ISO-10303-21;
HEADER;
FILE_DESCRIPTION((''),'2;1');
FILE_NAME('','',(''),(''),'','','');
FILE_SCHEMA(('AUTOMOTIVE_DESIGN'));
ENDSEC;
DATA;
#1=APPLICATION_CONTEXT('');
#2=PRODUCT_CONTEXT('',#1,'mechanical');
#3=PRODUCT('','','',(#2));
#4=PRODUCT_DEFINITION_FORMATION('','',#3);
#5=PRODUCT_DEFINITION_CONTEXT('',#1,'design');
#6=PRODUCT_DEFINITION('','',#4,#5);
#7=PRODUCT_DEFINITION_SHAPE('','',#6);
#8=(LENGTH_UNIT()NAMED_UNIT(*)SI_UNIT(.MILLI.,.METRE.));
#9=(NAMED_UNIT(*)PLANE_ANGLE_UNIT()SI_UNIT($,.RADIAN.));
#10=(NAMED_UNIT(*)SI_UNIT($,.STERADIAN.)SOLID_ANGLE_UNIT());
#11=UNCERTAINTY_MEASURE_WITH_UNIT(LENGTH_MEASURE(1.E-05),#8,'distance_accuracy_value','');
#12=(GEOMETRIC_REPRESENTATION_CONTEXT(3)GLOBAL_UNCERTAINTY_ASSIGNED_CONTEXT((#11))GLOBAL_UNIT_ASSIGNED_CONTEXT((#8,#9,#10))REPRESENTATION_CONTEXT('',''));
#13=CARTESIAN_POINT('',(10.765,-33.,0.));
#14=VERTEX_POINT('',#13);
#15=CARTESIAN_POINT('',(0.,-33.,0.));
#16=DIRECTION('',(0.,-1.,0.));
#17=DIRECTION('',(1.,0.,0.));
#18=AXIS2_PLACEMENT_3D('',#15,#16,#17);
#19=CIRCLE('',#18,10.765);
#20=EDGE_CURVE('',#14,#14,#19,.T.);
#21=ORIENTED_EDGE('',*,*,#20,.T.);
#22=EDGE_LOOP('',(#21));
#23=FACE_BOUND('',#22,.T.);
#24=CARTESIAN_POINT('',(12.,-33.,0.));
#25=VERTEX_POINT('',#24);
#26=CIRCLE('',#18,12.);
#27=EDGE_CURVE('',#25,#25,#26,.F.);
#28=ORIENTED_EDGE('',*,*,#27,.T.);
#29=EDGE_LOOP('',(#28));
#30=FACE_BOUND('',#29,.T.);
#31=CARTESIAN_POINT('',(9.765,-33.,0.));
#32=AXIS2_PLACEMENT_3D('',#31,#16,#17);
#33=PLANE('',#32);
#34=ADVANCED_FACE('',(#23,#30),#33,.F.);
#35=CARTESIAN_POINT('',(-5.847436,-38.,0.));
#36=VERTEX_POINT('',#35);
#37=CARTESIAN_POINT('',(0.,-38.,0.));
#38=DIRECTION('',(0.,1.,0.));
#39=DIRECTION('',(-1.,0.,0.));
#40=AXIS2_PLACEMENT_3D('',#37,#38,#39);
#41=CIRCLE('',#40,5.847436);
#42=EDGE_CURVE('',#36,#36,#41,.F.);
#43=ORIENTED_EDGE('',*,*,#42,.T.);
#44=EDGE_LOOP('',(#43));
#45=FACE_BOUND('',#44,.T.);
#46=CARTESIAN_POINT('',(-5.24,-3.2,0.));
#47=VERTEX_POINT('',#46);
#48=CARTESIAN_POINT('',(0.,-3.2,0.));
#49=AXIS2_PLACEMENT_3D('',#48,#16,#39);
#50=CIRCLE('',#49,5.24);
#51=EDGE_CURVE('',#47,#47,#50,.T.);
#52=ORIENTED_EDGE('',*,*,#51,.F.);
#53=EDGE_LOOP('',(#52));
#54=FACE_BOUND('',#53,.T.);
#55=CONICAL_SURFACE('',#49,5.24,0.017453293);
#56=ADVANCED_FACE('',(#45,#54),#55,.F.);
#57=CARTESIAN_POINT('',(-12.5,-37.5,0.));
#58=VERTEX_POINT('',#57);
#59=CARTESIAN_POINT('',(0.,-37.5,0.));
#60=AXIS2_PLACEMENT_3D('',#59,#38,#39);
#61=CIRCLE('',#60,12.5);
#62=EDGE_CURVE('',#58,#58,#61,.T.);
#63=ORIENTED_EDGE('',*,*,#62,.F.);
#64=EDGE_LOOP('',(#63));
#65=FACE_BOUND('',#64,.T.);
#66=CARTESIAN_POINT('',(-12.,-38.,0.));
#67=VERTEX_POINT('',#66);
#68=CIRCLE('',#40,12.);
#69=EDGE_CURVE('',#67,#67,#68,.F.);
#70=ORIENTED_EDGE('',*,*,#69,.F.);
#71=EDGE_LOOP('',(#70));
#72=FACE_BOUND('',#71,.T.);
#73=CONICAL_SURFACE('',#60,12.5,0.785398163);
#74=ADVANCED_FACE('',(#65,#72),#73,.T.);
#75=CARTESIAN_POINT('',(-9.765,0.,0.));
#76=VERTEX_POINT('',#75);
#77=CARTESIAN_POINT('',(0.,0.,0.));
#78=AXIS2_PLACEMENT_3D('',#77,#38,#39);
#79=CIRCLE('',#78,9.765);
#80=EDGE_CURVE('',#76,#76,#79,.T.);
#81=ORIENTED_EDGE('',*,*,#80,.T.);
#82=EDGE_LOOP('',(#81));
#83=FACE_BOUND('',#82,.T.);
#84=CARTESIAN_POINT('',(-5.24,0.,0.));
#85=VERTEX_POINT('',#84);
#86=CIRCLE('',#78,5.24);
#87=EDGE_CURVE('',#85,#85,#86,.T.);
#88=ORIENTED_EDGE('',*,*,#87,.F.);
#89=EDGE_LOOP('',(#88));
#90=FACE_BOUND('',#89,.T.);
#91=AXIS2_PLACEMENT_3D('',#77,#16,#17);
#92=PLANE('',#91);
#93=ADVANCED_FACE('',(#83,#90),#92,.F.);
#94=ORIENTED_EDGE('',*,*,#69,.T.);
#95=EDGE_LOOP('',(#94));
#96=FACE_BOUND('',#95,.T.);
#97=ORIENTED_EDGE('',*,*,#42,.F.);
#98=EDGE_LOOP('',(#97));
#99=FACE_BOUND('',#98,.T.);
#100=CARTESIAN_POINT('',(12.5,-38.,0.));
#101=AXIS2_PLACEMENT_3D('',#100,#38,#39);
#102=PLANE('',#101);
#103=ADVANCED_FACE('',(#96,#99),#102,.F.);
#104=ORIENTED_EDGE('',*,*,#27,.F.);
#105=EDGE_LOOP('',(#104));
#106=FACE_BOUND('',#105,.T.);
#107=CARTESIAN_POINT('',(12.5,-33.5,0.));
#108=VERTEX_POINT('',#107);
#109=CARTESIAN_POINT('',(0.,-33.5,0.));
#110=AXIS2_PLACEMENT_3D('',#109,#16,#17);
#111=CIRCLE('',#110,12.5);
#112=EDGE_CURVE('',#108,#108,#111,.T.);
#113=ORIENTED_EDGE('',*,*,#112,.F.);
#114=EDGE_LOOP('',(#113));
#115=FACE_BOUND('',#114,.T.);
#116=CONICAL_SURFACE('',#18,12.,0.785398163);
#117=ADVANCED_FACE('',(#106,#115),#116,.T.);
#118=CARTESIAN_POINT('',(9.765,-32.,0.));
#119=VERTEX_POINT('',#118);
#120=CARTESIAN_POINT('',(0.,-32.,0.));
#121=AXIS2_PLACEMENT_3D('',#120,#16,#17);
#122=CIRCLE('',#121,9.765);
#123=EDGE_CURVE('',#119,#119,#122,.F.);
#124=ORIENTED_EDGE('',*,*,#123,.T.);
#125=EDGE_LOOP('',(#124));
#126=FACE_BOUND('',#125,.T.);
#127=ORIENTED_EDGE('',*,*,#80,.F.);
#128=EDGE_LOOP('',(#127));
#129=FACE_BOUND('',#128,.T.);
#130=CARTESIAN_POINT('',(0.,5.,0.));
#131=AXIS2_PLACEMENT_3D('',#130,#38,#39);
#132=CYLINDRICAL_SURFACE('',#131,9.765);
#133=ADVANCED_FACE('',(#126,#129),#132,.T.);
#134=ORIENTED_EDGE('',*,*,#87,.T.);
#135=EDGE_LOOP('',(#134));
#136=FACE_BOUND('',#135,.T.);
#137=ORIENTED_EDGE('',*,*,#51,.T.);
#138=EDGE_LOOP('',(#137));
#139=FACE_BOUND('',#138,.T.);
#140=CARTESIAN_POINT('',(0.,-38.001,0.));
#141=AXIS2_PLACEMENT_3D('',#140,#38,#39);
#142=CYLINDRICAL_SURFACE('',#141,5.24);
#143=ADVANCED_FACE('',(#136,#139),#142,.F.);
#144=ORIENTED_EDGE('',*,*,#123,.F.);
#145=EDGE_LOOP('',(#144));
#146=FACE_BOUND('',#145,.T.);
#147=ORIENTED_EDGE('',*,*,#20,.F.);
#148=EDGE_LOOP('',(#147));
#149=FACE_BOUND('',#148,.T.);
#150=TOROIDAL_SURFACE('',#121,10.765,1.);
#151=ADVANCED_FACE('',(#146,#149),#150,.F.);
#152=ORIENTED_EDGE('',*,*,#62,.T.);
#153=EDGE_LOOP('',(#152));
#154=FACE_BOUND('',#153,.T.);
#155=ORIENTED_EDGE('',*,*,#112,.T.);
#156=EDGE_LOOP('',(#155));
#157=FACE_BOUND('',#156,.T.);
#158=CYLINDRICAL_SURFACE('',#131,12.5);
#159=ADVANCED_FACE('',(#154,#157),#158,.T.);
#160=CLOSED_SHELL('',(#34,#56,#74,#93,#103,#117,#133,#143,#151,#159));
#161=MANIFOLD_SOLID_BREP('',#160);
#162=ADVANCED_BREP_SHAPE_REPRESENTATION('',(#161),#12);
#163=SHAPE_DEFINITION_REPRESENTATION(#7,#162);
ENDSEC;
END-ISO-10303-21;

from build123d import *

# Parameters (mm, degrees)
CUT_EXTRUDE1_REACH = 43.911
SKETCH2_R          = 5.24
FILLET2_R          = 1
CHAMFER1_SIZE      = 0.5


# Read off the part's stored shape, not the designer's step: Draft1
with BuildPart() as part:
    # Sketch1 → Revolve1 (revolve)
    with BuildSketch(Plane.XY, mode=Mode.PRIVATE) as revolve1_sk:
        Polygon((0, 0), (9.765, 0), (9.765, -33), (12.5, -33), (12.5, -38), (0, -38), align=None)
    revolve(revolve1_sk.sketch.rotate(Axis((0, 5, 0), (0, -1, 0)), 180), axis=Axis((0, 5, 0), (0, -1, 0)))

    # Sketch2 → Cut-Extrude1 (cut, up to next)
    with BuildSketch(Plane(origin=(0, 0, 0), x_dir=(1, 0, 0), z_dir=(0, 1, 0)), mode=Mode.PRIVATE) as cut_extrude1_sk1:
        with Locations(Location((0, 0, 0), (0, 0, 180))):
            Circle(SKETCH2_R)
    cut_extrude1_tool1 = extrude(cut_extrude1_sk1.sketch, amount=-CUT_EXTRUDE1_REACH, mode=Mode.PRIVATE) & part.part
    add(cut_extrude1_tool1.solids().sort_by_distance((0, 0, 0))[0], mode=Mode.SUBTRACT)

    # Draft1 outline → Draft1 (revolve, cut)
    with BuildSketch(Plane.XY):
        Polygon((5.84743626, -38), (5.24, -3.2), (5.24, -38), align=None)
    revolve(axis=Axis((0, 0, 0), (0, 1, 0)), mode=Mode.SUBTRACT)

    # Fillet2
    fillet2_edges = [part.edges().sort_by_distance(p)[0] for p in [
        (9.765, -33, 0),
    ]]
    fillet(fillet2_edges, radius=FILLET2_R)

    # Chamfer1
    chamfer1_edges = [part.edges().sort_by_distance(p)[0] for p in [
        (12.5, -38, 0),
        (12.5, -33, 0),
    ]]
    chamfer(chamfer1_edges, length=CHAMFER1_SIZE)


solid = part.part
